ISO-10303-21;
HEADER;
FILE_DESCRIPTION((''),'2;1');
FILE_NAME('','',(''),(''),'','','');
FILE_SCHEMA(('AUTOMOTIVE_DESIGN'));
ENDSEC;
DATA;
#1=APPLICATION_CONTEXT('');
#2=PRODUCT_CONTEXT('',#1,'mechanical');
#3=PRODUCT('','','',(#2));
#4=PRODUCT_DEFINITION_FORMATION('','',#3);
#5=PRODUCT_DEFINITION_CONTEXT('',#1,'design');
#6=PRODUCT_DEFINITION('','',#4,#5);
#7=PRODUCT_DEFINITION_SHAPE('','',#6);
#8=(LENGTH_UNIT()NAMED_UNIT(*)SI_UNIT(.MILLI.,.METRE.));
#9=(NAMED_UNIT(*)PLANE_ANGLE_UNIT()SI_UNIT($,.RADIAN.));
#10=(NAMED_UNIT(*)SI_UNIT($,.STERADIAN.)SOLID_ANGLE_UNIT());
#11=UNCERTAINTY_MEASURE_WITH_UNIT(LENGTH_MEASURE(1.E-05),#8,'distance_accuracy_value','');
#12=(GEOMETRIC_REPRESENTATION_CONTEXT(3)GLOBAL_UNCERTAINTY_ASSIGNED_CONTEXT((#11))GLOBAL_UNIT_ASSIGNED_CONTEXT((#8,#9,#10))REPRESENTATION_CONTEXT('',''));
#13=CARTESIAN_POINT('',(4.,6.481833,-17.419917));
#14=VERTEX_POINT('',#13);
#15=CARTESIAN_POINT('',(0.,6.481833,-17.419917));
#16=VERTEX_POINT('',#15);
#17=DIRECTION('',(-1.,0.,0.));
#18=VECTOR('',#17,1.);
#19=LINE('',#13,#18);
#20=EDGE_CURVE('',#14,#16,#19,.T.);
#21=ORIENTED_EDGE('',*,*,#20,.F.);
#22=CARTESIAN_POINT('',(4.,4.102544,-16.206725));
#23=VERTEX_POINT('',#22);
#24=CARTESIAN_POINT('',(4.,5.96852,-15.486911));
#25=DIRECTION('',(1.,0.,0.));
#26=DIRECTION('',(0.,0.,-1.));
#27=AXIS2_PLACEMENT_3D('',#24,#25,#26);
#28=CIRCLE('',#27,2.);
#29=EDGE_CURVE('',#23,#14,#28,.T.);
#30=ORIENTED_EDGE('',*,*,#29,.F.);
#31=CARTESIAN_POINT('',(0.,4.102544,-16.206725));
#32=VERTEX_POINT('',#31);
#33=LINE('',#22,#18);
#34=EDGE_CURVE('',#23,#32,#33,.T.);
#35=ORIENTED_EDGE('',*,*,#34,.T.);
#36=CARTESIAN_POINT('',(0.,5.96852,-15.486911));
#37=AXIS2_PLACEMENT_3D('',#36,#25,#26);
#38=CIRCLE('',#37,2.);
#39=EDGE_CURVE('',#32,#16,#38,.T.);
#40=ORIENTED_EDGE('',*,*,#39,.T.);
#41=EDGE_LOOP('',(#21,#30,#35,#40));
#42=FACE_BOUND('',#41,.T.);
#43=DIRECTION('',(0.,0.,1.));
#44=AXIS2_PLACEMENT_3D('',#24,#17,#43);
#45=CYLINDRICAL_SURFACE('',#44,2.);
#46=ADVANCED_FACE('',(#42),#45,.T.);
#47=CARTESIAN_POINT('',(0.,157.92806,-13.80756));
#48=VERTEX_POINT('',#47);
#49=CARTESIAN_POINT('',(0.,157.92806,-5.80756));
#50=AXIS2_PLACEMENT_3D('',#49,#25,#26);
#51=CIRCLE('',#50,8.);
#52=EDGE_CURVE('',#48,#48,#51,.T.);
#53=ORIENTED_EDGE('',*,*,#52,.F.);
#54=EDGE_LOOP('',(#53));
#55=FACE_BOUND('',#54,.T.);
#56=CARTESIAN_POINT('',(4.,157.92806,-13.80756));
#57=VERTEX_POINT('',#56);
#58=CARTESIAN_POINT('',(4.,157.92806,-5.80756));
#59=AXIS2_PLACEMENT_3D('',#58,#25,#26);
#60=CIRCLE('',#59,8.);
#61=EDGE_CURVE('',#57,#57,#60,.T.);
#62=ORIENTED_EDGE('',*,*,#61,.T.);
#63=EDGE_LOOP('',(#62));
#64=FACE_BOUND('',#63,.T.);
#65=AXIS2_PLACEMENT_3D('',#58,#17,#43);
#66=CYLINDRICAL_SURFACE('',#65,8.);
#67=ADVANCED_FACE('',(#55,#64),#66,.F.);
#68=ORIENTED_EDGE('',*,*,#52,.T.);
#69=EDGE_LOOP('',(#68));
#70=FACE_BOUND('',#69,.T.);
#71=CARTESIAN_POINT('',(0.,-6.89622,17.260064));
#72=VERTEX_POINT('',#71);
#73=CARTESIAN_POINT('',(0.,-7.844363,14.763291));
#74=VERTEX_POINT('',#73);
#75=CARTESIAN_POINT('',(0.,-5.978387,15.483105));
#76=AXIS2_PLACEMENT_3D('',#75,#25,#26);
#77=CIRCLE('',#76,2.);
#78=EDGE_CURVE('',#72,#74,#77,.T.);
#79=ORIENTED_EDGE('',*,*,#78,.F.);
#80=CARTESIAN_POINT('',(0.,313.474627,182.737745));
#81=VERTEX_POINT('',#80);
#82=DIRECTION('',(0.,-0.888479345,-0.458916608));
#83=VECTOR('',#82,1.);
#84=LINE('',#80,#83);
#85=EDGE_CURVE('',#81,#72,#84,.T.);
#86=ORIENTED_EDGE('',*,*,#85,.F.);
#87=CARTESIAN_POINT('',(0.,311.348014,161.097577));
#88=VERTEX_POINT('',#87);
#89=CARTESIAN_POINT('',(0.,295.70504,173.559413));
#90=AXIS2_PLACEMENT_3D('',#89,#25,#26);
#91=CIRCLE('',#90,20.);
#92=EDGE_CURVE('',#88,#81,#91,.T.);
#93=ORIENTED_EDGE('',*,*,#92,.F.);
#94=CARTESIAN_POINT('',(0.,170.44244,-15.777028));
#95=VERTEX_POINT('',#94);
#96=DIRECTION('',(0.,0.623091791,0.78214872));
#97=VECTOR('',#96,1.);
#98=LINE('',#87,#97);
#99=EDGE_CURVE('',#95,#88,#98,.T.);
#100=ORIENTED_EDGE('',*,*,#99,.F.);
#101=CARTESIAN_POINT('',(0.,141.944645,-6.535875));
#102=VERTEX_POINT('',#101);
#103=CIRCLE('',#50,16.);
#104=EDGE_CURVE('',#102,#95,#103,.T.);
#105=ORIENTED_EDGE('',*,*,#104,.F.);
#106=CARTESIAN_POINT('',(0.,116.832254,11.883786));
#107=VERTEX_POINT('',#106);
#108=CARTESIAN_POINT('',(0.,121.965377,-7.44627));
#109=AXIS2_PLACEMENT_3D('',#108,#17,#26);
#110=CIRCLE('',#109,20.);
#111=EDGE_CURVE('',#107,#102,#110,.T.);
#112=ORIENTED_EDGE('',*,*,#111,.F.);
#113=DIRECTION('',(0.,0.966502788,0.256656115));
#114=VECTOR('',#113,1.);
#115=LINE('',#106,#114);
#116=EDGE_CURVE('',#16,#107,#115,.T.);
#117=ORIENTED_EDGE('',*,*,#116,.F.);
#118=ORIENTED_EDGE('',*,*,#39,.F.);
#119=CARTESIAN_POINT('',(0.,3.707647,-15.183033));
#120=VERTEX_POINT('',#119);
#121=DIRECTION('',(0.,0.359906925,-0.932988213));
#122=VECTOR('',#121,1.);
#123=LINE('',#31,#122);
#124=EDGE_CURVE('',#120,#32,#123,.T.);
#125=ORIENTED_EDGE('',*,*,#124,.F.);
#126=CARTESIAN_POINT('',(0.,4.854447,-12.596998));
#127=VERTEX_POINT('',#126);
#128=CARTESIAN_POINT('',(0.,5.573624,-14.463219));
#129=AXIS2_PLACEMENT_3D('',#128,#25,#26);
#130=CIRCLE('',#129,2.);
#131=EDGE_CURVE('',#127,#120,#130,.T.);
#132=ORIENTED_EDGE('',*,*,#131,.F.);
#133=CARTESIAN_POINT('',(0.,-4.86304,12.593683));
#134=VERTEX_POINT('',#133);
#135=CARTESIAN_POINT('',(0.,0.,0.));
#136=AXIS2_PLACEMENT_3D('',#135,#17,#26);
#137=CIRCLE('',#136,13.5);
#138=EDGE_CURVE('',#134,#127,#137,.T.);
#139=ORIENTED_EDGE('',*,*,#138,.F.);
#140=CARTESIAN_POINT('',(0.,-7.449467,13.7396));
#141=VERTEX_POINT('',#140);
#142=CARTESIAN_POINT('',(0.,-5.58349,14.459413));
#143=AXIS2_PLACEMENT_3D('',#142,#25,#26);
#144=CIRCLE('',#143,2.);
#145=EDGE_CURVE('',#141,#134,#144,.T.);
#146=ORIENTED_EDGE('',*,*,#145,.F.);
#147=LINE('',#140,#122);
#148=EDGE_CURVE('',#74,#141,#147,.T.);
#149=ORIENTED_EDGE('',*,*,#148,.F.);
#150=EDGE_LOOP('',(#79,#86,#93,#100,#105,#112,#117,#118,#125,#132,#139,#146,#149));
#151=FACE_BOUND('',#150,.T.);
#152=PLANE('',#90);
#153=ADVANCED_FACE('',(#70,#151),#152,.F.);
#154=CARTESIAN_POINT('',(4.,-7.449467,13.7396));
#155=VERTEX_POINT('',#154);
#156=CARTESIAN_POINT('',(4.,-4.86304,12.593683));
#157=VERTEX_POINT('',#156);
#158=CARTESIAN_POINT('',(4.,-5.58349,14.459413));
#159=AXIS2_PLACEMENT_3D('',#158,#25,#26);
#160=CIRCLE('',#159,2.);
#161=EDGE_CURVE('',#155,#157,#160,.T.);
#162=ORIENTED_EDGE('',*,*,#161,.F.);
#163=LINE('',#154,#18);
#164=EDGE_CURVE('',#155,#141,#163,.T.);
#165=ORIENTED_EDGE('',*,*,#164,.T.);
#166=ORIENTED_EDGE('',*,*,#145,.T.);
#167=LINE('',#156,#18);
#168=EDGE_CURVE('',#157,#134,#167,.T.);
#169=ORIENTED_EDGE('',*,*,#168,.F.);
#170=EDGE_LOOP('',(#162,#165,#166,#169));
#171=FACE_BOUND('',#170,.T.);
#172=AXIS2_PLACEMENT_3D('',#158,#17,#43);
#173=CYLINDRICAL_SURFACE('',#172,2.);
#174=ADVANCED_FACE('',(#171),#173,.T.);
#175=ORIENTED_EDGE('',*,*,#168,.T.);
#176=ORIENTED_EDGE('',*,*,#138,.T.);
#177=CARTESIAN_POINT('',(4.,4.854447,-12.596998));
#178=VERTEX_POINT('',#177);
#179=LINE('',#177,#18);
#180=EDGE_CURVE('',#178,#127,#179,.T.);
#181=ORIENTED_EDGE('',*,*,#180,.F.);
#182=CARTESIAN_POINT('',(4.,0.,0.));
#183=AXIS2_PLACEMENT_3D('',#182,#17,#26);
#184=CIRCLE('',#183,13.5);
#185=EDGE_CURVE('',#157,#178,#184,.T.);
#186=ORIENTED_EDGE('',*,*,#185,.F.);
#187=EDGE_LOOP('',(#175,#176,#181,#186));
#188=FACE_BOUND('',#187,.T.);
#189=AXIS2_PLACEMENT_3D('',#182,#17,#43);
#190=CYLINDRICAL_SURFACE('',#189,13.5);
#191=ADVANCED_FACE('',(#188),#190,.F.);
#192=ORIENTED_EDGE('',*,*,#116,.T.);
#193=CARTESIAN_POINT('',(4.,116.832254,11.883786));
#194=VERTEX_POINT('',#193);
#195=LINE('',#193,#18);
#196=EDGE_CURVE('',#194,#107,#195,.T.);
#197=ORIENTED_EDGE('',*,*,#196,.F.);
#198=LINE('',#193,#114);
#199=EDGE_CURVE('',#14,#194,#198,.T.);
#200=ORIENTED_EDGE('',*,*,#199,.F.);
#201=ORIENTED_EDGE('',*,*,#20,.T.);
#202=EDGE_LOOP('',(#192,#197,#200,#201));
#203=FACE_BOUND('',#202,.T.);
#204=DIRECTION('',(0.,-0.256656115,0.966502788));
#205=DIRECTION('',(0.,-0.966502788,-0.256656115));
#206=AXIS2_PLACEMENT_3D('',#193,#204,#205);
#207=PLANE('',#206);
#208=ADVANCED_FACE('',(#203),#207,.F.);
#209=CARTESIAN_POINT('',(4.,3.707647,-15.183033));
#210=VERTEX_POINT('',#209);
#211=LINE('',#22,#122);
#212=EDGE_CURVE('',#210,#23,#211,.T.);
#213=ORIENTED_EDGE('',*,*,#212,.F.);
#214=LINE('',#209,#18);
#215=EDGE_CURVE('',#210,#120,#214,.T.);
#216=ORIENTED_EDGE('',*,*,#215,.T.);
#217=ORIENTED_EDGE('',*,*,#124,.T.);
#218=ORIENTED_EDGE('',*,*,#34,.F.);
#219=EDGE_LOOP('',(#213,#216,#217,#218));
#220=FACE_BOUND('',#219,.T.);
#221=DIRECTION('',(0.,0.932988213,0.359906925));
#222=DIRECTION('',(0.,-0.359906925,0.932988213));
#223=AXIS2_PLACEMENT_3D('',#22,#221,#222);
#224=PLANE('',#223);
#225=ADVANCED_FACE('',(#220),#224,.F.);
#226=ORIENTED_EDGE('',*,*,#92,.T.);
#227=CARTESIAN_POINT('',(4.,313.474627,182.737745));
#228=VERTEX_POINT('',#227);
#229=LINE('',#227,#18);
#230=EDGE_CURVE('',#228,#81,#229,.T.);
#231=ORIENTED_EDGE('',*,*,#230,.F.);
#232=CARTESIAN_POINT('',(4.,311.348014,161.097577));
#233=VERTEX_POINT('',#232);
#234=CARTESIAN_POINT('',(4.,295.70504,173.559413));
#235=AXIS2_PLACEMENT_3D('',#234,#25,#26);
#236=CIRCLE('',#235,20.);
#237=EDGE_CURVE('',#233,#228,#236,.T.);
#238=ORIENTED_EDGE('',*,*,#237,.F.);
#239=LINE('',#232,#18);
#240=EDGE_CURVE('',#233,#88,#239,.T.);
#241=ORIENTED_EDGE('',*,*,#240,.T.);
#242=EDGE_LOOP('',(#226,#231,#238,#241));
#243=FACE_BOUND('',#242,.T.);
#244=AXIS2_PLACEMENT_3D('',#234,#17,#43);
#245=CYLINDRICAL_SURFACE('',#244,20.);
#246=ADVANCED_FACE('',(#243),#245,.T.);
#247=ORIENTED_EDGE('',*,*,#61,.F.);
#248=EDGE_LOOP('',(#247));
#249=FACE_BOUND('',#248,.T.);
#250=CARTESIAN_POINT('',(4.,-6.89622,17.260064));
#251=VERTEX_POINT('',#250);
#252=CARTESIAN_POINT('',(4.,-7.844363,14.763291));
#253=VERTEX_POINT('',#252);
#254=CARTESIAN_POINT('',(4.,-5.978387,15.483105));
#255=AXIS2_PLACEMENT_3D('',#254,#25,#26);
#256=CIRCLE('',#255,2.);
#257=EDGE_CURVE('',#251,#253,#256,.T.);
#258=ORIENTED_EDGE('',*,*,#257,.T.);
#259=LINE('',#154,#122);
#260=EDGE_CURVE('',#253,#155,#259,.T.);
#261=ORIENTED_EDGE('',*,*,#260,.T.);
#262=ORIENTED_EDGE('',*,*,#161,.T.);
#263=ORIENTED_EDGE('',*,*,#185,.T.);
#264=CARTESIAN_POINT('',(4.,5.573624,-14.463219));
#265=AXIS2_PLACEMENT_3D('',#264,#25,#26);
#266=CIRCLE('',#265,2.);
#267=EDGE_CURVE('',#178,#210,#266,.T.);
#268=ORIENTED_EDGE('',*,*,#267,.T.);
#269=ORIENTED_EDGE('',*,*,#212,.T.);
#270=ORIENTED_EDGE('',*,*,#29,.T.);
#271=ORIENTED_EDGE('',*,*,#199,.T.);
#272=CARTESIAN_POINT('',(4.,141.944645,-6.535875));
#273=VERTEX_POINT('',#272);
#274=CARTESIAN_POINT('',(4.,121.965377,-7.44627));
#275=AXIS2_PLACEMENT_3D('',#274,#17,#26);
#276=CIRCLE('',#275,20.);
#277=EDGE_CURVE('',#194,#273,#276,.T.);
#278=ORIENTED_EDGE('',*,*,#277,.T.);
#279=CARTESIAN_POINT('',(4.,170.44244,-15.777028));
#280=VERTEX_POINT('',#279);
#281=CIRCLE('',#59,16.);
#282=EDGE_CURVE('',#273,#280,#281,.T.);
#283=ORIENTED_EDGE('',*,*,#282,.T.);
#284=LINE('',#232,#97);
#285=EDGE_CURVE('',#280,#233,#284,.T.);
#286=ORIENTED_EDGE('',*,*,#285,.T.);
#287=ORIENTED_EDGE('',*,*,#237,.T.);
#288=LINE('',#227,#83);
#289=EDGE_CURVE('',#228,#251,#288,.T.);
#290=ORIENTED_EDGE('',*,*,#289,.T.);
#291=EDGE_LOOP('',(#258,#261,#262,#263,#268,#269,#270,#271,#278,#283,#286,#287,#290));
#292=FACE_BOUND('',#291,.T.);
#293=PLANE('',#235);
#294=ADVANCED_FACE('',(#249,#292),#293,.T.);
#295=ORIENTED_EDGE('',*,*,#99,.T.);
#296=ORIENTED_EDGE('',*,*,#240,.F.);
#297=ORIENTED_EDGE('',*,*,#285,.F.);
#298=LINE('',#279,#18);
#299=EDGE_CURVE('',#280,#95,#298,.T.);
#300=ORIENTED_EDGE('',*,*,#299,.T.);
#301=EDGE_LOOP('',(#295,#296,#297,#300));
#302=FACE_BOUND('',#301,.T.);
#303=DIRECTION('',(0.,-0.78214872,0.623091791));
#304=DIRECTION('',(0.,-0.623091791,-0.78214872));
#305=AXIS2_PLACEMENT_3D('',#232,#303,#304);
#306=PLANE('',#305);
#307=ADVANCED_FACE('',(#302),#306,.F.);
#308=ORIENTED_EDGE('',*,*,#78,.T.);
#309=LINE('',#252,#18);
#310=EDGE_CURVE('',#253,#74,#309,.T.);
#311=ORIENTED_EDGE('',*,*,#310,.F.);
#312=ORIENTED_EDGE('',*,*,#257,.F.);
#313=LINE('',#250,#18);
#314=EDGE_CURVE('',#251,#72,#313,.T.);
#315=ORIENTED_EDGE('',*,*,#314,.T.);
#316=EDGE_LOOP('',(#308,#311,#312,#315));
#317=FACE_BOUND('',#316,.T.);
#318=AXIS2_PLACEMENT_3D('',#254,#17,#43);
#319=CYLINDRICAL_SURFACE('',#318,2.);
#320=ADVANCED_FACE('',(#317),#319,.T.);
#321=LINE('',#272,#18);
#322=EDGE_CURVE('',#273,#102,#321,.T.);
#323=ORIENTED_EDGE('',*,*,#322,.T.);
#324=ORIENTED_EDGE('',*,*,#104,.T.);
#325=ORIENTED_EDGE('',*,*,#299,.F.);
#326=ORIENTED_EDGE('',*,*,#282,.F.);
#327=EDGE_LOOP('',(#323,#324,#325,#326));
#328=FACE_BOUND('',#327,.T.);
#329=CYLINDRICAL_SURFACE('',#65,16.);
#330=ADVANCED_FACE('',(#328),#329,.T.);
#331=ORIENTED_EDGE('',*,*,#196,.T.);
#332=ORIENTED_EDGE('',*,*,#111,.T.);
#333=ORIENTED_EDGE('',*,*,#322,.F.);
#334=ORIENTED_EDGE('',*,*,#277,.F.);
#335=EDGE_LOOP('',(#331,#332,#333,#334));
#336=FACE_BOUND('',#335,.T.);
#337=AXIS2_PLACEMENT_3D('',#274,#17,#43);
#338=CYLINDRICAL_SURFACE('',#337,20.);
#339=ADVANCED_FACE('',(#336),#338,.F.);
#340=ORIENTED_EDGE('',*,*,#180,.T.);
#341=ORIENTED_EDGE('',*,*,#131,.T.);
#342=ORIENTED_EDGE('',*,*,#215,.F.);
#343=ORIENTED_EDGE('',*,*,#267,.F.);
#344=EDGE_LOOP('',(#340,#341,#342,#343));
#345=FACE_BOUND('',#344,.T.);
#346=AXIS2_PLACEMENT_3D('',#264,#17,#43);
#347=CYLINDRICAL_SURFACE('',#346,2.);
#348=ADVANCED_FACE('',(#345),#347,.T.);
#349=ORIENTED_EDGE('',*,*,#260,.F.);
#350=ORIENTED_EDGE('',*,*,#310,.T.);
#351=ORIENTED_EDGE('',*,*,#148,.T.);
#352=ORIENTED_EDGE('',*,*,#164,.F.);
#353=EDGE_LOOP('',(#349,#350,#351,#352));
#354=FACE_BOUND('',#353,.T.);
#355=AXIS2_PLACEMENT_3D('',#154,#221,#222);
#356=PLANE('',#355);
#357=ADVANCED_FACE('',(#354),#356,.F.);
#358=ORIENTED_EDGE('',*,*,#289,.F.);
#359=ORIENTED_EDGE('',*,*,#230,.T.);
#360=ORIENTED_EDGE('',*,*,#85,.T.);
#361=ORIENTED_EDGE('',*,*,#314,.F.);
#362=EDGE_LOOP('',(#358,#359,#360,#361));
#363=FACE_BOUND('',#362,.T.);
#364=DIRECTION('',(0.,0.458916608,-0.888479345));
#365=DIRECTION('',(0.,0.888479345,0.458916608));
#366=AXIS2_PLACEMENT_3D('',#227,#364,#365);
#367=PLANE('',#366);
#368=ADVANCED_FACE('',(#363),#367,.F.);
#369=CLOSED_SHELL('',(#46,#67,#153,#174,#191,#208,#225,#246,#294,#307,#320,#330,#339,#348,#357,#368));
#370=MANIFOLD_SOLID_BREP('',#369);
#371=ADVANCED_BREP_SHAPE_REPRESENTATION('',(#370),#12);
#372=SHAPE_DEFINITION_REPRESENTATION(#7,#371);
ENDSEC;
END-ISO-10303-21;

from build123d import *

# Parameters (mm, degrees)
SKETCH_1_R             = 8
SM_BASE_FLANGE_1_DEPTH = 4


# Sheet-metal steps are written as plain solids
with BuildPart() as part:
    # Sketch 1 → Базовая кромка1 (new body)
    with BuildSketch(Plane(origin=(0, 0, 0), x_dir=(0, 0, -1), z_dir=(1, 0, 0))):
        with BuildLine():
            Line((-161.097577427, 311.348014413), (15.777028295, 170.442439889))
            ThreePointArc((15.777028295, 170.442439889), (21.027340211, 152.992649587), (6.535875187, 141.944645322))
            ThreePointArc((6.535875187, 141.944645322), (-8.680633455, 133.794281683), (-11.883786143, 116.832254223))
            Line((-11.883786143, 116.832254223), (17.41991669, 6.481832542))
            ThreePointArc((17.41991669, 6.481832542), (17.268656425, 5.060014039), (16.206724964, 4.102543887))
            Line((16.206724964, 4.102543887), (15.1830333, 3.707647452))
            ThreePointArc((15.1830333, 3.707647452), (13.65244827, 3.7453323), (12.596997586, 4.854446603))
            ThreePointArc((12.596997586, 4.854446603), (-4.858743487, 12.595340874), (-12.593682696, -4.863039806))
            ThreePointArc((-12.593682696, -4.863039806), (-12.630845419, -6.393637603), (-13.739599615, -7.449466574))
            Line((-13.739599615, -7.449466574), (-14.763291279, -7.844363009))
            ThreePointArc((-14.763291279, -7.844363009), (-16.19312815, -7.848110442), (-17.26006382, -6.896219798))
            Line((-17.26006382, -6.896219798), (-182.737745394, 313.474626916))
            ThreePointArc((-182.737745394, 313.474626916), (-171.603404739, 315.609160958), (-161.097577427, 311.348014413))
        make_face()
        with Locations((5.807559646, 157.928060366)):
            Circle(SKETCH_1_R, mode=Mode.SUBTRACT)
    extrude(amount=SM_BASE_FLANGE_1_DEPTH)


solid = part.part
